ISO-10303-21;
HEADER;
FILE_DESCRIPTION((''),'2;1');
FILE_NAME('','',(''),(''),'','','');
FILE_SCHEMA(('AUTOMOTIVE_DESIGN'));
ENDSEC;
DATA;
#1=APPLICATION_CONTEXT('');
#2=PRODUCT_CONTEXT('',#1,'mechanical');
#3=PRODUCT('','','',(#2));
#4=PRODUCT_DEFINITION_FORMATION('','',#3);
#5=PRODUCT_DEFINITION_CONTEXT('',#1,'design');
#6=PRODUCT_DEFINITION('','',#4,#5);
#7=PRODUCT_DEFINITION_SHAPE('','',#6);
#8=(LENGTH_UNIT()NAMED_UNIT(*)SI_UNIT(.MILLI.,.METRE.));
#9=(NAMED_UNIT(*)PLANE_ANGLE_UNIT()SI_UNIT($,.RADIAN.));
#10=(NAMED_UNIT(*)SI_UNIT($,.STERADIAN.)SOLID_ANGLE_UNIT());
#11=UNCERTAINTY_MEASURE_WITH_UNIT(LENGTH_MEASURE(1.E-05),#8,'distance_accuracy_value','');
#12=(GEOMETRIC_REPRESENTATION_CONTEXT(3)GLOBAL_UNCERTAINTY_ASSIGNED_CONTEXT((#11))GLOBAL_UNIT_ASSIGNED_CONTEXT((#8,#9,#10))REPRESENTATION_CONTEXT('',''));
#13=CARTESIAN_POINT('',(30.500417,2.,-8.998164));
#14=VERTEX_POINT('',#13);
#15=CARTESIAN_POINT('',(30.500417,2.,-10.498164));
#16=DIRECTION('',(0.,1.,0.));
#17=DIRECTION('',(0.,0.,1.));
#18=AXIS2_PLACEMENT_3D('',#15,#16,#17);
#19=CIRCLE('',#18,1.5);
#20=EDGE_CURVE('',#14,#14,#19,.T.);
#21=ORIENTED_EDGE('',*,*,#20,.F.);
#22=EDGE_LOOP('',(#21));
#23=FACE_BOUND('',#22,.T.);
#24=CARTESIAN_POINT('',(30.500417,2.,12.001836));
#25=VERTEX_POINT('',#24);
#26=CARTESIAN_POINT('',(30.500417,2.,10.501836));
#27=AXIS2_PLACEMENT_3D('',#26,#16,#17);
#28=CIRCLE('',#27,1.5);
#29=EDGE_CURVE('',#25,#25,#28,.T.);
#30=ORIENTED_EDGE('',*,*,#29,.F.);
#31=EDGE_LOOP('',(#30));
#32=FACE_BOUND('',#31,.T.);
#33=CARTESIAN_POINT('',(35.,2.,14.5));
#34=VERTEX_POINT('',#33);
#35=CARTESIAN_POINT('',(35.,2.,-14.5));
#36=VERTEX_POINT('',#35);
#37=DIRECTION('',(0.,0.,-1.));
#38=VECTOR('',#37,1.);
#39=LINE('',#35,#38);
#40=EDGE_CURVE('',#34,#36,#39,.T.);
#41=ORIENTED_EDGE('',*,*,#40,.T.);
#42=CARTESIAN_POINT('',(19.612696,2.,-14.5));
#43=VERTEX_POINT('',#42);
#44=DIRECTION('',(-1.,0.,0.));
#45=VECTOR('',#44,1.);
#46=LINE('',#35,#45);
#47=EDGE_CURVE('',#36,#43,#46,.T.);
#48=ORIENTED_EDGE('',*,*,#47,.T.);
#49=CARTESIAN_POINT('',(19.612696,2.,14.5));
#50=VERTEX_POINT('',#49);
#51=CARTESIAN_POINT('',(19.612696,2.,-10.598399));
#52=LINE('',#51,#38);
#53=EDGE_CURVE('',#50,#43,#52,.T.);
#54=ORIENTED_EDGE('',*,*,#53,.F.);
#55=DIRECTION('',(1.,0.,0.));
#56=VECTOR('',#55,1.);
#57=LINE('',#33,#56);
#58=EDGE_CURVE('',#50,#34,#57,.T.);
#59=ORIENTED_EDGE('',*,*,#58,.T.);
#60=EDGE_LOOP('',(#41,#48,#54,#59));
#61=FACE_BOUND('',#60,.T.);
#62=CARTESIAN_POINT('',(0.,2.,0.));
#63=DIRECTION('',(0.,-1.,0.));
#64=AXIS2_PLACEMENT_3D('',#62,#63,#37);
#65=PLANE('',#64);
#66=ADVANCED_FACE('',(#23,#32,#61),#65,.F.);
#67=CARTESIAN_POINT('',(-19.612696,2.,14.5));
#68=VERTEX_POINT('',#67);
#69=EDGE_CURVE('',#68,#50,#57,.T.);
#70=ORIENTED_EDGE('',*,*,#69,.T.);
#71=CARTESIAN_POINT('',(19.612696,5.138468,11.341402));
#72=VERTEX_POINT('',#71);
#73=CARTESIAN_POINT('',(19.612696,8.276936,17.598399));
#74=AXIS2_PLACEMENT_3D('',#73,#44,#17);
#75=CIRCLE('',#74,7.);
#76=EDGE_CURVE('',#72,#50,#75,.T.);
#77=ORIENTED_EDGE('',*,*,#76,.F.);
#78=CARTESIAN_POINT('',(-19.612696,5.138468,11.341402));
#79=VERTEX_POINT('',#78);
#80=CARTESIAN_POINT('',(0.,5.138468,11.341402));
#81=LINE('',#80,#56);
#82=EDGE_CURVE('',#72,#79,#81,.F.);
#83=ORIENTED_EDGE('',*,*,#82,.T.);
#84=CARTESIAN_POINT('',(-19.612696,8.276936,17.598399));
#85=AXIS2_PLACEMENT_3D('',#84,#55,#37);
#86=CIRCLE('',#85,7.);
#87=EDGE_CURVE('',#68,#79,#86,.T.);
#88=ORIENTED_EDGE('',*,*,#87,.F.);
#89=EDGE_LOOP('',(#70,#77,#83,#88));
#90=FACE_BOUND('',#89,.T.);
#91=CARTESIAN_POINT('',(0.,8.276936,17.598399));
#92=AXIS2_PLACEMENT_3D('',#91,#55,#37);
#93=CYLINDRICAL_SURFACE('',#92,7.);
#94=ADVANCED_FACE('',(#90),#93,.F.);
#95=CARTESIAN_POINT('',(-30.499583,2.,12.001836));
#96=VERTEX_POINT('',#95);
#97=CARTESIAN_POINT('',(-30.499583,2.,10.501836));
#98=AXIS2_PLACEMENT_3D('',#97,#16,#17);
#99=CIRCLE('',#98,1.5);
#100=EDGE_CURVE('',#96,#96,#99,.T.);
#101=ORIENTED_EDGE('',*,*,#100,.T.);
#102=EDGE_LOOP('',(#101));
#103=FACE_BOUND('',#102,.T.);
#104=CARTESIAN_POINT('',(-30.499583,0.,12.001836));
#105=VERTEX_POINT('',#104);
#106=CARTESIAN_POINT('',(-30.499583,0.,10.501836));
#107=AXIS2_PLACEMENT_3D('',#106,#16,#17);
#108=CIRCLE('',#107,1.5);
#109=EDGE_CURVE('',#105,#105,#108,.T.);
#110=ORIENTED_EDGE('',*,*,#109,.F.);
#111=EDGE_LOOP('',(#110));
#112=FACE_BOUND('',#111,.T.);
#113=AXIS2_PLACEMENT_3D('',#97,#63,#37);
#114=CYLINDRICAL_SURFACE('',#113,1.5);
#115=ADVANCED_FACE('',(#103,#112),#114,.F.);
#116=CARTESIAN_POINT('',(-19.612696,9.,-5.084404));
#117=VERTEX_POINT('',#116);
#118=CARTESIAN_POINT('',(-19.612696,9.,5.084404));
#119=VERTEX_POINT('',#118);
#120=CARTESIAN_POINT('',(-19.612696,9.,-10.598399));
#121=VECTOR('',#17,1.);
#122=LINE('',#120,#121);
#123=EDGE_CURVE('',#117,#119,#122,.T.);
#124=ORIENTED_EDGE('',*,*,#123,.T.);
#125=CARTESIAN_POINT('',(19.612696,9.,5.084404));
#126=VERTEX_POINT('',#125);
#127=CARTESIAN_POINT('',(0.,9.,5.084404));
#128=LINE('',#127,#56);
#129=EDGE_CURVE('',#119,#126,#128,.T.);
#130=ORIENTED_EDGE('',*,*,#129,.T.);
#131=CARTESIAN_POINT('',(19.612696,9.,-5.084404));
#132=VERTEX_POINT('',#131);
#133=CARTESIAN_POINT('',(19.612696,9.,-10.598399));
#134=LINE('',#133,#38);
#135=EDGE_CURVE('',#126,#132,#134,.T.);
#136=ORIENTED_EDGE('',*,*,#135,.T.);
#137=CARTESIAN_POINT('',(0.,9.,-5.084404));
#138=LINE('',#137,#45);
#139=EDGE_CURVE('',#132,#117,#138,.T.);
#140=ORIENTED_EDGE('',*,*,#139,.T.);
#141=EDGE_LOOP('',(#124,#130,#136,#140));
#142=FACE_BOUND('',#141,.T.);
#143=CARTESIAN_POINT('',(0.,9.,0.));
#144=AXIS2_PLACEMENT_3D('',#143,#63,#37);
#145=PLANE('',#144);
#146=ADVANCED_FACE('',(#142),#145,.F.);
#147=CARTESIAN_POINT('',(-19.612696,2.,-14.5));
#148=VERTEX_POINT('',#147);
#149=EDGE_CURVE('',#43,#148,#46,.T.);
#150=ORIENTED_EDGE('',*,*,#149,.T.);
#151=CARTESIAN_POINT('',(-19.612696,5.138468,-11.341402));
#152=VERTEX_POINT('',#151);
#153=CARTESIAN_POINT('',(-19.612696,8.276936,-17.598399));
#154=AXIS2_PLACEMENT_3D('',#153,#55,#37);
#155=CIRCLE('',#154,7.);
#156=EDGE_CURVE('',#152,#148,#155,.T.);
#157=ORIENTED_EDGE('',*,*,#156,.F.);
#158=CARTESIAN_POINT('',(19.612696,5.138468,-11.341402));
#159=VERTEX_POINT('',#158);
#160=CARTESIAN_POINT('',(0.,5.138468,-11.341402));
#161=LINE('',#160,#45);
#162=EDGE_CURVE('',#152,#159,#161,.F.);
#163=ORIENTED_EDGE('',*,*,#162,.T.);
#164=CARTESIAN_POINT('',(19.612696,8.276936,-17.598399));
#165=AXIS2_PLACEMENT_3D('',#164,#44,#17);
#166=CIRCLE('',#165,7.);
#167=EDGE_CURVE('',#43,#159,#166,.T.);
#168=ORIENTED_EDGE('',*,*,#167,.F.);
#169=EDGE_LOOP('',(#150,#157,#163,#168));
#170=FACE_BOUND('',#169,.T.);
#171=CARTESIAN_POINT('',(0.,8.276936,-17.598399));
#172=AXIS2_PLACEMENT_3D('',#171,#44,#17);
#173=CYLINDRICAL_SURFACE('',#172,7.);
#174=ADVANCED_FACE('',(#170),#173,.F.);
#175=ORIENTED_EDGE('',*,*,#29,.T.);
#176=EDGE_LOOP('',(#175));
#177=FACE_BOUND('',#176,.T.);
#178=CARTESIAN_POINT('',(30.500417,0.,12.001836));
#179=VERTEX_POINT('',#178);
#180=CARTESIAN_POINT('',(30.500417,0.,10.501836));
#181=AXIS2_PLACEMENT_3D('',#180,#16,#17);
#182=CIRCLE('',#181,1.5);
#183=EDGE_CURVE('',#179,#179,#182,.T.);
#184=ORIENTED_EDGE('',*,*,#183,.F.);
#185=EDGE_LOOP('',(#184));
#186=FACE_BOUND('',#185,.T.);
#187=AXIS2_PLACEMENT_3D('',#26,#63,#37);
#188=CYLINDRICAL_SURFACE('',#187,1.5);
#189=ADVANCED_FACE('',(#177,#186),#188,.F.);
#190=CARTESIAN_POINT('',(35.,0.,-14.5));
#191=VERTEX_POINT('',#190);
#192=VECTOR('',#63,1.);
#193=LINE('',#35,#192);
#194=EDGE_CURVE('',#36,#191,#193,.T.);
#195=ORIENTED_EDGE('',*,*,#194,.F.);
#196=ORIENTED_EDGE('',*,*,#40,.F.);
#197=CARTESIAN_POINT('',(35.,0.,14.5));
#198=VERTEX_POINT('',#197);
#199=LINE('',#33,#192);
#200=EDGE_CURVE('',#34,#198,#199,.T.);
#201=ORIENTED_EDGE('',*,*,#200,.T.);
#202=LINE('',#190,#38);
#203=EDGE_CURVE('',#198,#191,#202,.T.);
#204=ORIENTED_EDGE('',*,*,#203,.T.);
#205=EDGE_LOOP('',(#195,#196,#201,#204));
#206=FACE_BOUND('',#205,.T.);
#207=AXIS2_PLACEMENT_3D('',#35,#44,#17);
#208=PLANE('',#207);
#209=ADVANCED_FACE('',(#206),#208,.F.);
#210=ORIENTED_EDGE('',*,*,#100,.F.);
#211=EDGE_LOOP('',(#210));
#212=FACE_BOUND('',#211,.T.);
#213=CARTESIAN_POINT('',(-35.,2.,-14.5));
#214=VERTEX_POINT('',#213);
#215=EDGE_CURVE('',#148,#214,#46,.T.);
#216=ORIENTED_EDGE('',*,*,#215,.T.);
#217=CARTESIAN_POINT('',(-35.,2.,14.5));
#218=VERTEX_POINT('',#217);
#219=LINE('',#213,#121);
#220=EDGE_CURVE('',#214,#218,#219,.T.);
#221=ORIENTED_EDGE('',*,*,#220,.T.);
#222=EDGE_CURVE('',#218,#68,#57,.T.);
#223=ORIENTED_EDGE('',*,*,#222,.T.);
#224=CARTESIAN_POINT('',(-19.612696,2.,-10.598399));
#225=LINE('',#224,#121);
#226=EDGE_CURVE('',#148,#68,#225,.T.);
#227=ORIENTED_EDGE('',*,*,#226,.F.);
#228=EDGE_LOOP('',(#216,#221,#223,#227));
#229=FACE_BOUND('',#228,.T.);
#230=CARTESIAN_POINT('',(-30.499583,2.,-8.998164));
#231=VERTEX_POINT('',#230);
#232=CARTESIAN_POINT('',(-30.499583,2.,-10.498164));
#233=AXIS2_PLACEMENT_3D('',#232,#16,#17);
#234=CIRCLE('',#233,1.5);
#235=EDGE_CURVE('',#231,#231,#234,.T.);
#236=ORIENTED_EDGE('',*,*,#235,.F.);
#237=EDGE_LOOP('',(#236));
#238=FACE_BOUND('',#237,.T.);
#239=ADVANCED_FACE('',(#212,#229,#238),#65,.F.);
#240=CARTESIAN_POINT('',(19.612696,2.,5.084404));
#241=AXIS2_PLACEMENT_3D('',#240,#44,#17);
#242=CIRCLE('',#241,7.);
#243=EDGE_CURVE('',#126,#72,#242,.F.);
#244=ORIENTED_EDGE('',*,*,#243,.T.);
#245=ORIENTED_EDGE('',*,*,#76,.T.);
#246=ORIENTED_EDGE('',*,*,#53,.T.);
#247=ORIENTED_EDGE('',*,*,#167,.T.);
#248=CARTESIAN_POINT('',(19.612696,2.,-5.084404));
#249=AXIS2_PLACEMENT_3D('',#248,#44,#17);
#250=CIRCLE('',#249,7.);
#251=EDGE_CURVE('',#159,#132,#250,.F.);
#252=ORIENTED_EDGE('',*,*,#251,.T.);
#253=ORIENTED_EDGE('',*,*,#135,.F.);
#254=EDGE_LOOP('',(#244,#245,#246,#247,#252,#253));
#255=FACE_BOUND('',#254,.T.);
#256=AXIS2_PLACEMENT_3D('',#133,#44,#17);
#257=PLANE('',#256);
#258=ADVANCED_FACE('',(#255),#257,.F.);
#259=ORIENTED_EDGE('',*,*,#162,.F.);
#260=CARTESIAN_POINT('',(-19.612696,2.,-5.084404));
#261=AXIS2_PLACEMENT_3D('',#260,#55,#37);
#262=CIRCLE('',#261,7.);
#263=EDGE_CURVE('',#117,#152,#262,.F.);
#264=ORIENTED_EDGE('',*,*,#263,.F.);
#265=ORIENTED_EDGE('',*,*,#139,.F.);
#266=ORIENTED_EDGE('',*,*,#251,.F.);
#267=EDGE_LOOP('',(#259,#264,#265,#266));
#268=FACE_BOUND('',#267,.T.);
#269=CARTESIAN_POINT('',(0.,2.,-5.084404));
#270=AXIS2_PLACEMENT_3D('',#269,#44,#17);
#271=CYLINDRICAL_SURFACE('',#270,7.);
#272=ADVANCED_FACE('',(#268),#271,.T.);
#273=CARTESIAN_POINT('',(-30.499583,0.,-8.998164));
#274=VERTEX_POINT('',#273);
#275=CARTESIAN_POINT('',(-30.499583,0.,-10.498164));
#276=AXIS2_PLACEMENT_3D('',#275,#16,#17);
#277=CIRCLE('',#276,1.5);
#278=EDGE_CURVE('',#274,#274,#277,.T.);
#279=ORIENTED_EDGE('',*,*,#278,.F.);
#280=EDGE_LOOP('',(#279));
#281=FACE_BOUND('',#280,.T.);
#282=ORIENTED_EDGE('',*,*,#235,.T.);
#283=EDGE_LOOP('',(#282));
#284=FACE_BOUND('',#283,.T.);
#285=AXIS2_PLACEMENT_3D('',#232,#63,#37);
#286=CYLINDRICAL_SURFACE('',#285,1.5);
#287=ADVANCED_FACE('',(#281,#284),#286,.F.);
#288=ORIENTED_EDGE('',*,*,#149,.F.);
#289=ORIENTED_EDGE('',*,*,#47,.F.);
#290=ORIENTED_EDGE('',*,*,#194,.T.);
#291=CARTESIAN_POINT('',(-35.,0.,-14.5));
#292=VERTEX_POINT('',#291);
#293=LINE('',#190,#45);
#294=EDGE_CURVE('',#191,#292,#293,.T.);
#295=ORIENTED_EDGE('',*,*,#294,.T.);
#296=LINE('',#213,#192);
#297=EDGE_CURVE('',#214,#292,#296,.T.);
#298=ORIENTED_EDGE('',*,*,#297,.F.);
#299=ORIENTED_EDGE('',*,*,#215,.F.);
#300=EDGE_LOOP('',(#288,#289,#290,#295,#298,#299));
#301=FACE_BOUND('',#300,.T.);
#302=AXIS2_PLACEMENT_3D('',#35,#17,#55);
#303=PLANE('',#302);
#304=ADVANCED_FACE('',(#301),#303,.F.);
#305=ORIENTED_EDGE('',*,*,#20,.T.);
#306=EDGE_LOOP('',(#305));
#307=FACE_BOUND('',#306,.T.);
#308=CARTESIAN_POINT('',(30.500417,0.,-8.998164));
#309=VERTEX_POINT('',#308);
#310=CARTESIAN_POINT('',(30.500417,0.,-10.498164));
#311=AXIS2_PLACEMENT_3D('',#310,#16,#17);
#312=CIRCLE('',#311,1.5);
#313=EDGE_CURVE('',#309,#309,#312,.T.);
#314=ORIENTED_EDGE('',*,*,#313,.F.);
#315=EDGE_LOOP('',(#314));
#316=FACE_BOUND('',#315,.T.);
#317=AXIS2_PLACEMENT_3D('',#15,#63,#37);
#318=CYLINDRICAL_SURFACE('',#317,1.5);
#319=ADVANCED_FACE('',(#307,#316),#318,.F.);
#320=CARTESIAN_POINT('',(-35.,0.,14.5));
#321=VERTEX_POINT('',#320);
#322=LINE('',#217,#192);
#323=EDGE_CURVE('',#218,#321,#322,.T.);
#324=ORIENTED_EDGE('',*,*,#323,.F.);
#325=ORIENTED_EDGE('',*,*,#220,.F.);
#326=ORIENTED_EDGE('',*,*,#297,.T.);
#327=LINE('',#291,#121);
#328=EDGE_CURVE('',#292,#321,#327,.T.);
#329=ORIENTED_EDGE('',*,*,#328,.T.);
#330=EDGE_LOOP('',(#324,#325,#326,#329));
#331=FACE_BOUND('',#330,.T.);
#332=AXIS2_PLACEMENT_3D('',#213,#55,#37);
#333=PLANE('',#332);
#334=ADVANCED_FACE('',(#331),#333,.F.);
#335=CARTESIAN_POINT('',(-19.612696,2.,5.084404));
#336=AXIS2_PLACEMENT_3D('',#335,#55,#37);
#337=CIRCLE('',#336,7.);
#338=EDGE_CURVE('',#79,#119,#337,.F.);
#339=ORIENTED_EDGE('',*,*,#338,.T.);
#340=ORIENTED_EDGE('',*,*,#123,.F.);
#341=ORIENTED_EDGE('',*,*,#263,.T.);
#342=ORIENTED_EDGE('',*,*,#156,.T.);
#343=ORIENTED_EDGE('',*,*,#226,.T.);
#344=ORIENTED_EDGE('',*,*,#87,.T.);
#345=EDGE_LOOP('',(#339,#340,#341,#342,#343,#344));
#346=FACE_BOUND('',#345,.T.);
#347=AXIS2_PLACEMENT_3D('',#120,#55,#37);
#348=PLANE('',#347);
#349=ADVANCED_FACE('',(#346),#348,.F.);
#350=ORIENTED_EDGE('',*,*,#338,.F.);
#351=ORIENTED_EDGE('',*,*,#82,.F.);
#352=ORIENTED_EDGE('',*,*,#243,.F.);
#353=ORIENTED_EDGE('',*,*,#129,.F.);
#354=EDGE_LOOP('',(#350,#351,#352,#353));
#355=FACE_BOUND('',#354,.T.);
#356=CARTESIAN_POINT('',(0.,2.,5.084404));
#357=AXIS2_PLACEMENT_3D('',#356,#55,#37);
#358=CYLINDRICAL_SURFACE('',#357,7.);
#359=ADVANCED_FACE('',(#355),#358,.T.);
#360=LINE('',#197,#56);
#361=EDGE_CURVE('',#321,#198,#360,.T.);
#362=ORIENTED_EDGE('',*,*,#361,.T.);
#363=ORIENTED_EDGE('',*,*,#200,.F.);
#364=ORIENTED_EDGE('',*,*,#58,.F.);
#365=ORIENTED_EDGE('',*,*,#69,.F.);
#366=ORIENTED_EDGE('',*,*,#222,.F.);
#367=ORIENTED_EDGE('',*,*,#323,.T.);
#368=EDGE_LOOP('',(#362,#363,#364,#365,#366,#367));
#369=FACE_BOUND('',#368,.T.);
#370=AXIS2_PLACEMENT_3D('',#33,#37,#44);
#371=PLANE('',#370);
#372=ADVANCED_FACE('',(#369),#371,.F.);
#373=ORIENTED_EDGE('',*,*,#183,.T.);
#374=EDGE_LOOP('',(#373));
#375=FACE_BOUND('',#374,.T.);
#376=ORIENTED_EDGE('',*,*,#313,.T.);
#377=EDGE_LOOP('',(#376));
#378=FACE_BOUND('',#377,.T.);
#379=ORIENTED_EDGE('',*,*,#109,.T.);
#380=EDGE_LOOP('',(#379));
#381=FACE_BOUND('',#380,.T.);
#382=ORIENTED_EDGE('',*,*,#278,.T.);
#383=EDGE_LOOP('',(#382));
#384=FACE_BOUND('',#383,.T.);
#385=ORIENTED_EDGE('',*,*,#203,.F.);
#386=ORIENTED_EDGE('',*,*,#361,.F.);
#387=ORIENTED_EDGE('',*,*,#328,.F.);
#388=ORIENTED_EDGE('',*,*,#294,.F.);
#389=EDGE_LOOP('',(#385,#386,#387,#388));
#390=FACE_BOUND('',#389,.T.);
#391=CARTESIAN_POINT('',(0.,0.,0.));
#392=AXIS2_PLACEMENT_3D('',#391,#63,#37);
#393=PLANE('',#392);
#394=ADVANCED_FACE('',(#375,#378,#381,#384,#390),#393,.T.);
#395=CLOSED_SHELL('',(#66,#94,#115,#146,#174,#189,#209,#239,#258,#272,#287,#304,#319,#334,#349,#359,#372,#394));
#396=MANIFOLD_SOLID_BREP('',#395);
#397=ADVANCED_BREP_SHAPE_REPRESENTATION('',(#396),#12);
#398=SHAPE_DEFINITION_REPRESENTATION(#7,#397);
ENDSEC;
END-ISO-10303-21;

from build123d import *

# Parameters (mm, degrees)
SKETCH1_W           = 70
SKETCH1_H           = 29
SKETCH1_R           = 1.5
BOSS_EXTRUDE1_DEPTH = 2
SKETCH3_W           = 39.225392784
SKETCH3_H           = 21.196798794
BOSS_EXTRUDE2_DEPTH = 7
FILLET2_R           = 7
FILLET3_R           = 7


with BuildPart() as part:
    # Sketch1 → Boss-Extrude1 (new body)
    with BuildSketch(Plane(origin=(0, 0, 0), x_dir=(1, 0, 0), z_dir=(0, 1, 0))):
        Rectangle(SKETCH1_W, SKETCH1_H)
        with Locations(Location((-30.499583195, 10.498163925, 0), (0, 0, 270))):
            Circle(SKETCH1_R, mode=Mode.SUBTRACT)
        with Locations(Location((30.500416805, 10.498163925, 0), (0, 0, 270))):
            Circle(SKETCH1_R, mode=Mode.SUBTRACT)
        with Locations(Location((-30.499583195, -10.501836075, 0), (0, 0, 270))):
            Circle(SKETCH1_R, mode=Mode.SUBTRACT)
        with Locations(Location((30.500416805, -10.501836075, 0), (0, 0, 270))):
            Circle(SKETCH1_R, mode=Mode.SUBTRACT)
    extrude(amount=BOSS_EXTRUDE1_DEPTH)

    # Sketch3 → Boss-Extrude2 (add)
    with BuildSketch(Plane(origin=(0, 2, 0), x_dir=(1, 0, 0), z_dir=(0, 1, 0))):
        Rectangle(SKETCH3_W, SKETCH3_H)
    extrude(amount=BOSS_EXTRUDE2_DEPTH)

    # Fillet2
    # the kernel refuses this fillet: 7 mm, written as the material it adds along each edge
    with BuildSketch(Plane(origin=(-19.612696392, 2, 10.598399397), x_dir=(0, 0, 1), z_dir=(1, 0, 0)), Plane(origin=(19.612696392, 2, -10.598399397), x_dir=(0, 0, -1), z_dir=(-1, 0, 0))) as fillet2_piece_1:
        with BuildLine():
            CenterArc((7, -6.276935652), FILLET2_R, 116.271709478, 63.728290522)
            Line((0, -6.276935652), (-0.14, -6.276935652))
            Line((-0.14, -6.276935652), (-0.14, 0))
            Line((-0.14, 0), (0, 0.14))
            ThreePointArc((0, 0.14), (1.950800302, 0.14), (3.839632616, 0.125538713))
            Line((3.839632616, 0.125538713), (3.901600603, 0))
        make_face()
    extrude(amount=39.225392784)

    # Fillet3
    fillet3_edges = [part.edges().sort_by_distance(p)[0] for p in [
        (0, 9, -10.598399397),
        (0, 9, 10.598399397),
    ]]
    fillet(fillet3_edges, radius=FILLET3_R)


solid = part.part
